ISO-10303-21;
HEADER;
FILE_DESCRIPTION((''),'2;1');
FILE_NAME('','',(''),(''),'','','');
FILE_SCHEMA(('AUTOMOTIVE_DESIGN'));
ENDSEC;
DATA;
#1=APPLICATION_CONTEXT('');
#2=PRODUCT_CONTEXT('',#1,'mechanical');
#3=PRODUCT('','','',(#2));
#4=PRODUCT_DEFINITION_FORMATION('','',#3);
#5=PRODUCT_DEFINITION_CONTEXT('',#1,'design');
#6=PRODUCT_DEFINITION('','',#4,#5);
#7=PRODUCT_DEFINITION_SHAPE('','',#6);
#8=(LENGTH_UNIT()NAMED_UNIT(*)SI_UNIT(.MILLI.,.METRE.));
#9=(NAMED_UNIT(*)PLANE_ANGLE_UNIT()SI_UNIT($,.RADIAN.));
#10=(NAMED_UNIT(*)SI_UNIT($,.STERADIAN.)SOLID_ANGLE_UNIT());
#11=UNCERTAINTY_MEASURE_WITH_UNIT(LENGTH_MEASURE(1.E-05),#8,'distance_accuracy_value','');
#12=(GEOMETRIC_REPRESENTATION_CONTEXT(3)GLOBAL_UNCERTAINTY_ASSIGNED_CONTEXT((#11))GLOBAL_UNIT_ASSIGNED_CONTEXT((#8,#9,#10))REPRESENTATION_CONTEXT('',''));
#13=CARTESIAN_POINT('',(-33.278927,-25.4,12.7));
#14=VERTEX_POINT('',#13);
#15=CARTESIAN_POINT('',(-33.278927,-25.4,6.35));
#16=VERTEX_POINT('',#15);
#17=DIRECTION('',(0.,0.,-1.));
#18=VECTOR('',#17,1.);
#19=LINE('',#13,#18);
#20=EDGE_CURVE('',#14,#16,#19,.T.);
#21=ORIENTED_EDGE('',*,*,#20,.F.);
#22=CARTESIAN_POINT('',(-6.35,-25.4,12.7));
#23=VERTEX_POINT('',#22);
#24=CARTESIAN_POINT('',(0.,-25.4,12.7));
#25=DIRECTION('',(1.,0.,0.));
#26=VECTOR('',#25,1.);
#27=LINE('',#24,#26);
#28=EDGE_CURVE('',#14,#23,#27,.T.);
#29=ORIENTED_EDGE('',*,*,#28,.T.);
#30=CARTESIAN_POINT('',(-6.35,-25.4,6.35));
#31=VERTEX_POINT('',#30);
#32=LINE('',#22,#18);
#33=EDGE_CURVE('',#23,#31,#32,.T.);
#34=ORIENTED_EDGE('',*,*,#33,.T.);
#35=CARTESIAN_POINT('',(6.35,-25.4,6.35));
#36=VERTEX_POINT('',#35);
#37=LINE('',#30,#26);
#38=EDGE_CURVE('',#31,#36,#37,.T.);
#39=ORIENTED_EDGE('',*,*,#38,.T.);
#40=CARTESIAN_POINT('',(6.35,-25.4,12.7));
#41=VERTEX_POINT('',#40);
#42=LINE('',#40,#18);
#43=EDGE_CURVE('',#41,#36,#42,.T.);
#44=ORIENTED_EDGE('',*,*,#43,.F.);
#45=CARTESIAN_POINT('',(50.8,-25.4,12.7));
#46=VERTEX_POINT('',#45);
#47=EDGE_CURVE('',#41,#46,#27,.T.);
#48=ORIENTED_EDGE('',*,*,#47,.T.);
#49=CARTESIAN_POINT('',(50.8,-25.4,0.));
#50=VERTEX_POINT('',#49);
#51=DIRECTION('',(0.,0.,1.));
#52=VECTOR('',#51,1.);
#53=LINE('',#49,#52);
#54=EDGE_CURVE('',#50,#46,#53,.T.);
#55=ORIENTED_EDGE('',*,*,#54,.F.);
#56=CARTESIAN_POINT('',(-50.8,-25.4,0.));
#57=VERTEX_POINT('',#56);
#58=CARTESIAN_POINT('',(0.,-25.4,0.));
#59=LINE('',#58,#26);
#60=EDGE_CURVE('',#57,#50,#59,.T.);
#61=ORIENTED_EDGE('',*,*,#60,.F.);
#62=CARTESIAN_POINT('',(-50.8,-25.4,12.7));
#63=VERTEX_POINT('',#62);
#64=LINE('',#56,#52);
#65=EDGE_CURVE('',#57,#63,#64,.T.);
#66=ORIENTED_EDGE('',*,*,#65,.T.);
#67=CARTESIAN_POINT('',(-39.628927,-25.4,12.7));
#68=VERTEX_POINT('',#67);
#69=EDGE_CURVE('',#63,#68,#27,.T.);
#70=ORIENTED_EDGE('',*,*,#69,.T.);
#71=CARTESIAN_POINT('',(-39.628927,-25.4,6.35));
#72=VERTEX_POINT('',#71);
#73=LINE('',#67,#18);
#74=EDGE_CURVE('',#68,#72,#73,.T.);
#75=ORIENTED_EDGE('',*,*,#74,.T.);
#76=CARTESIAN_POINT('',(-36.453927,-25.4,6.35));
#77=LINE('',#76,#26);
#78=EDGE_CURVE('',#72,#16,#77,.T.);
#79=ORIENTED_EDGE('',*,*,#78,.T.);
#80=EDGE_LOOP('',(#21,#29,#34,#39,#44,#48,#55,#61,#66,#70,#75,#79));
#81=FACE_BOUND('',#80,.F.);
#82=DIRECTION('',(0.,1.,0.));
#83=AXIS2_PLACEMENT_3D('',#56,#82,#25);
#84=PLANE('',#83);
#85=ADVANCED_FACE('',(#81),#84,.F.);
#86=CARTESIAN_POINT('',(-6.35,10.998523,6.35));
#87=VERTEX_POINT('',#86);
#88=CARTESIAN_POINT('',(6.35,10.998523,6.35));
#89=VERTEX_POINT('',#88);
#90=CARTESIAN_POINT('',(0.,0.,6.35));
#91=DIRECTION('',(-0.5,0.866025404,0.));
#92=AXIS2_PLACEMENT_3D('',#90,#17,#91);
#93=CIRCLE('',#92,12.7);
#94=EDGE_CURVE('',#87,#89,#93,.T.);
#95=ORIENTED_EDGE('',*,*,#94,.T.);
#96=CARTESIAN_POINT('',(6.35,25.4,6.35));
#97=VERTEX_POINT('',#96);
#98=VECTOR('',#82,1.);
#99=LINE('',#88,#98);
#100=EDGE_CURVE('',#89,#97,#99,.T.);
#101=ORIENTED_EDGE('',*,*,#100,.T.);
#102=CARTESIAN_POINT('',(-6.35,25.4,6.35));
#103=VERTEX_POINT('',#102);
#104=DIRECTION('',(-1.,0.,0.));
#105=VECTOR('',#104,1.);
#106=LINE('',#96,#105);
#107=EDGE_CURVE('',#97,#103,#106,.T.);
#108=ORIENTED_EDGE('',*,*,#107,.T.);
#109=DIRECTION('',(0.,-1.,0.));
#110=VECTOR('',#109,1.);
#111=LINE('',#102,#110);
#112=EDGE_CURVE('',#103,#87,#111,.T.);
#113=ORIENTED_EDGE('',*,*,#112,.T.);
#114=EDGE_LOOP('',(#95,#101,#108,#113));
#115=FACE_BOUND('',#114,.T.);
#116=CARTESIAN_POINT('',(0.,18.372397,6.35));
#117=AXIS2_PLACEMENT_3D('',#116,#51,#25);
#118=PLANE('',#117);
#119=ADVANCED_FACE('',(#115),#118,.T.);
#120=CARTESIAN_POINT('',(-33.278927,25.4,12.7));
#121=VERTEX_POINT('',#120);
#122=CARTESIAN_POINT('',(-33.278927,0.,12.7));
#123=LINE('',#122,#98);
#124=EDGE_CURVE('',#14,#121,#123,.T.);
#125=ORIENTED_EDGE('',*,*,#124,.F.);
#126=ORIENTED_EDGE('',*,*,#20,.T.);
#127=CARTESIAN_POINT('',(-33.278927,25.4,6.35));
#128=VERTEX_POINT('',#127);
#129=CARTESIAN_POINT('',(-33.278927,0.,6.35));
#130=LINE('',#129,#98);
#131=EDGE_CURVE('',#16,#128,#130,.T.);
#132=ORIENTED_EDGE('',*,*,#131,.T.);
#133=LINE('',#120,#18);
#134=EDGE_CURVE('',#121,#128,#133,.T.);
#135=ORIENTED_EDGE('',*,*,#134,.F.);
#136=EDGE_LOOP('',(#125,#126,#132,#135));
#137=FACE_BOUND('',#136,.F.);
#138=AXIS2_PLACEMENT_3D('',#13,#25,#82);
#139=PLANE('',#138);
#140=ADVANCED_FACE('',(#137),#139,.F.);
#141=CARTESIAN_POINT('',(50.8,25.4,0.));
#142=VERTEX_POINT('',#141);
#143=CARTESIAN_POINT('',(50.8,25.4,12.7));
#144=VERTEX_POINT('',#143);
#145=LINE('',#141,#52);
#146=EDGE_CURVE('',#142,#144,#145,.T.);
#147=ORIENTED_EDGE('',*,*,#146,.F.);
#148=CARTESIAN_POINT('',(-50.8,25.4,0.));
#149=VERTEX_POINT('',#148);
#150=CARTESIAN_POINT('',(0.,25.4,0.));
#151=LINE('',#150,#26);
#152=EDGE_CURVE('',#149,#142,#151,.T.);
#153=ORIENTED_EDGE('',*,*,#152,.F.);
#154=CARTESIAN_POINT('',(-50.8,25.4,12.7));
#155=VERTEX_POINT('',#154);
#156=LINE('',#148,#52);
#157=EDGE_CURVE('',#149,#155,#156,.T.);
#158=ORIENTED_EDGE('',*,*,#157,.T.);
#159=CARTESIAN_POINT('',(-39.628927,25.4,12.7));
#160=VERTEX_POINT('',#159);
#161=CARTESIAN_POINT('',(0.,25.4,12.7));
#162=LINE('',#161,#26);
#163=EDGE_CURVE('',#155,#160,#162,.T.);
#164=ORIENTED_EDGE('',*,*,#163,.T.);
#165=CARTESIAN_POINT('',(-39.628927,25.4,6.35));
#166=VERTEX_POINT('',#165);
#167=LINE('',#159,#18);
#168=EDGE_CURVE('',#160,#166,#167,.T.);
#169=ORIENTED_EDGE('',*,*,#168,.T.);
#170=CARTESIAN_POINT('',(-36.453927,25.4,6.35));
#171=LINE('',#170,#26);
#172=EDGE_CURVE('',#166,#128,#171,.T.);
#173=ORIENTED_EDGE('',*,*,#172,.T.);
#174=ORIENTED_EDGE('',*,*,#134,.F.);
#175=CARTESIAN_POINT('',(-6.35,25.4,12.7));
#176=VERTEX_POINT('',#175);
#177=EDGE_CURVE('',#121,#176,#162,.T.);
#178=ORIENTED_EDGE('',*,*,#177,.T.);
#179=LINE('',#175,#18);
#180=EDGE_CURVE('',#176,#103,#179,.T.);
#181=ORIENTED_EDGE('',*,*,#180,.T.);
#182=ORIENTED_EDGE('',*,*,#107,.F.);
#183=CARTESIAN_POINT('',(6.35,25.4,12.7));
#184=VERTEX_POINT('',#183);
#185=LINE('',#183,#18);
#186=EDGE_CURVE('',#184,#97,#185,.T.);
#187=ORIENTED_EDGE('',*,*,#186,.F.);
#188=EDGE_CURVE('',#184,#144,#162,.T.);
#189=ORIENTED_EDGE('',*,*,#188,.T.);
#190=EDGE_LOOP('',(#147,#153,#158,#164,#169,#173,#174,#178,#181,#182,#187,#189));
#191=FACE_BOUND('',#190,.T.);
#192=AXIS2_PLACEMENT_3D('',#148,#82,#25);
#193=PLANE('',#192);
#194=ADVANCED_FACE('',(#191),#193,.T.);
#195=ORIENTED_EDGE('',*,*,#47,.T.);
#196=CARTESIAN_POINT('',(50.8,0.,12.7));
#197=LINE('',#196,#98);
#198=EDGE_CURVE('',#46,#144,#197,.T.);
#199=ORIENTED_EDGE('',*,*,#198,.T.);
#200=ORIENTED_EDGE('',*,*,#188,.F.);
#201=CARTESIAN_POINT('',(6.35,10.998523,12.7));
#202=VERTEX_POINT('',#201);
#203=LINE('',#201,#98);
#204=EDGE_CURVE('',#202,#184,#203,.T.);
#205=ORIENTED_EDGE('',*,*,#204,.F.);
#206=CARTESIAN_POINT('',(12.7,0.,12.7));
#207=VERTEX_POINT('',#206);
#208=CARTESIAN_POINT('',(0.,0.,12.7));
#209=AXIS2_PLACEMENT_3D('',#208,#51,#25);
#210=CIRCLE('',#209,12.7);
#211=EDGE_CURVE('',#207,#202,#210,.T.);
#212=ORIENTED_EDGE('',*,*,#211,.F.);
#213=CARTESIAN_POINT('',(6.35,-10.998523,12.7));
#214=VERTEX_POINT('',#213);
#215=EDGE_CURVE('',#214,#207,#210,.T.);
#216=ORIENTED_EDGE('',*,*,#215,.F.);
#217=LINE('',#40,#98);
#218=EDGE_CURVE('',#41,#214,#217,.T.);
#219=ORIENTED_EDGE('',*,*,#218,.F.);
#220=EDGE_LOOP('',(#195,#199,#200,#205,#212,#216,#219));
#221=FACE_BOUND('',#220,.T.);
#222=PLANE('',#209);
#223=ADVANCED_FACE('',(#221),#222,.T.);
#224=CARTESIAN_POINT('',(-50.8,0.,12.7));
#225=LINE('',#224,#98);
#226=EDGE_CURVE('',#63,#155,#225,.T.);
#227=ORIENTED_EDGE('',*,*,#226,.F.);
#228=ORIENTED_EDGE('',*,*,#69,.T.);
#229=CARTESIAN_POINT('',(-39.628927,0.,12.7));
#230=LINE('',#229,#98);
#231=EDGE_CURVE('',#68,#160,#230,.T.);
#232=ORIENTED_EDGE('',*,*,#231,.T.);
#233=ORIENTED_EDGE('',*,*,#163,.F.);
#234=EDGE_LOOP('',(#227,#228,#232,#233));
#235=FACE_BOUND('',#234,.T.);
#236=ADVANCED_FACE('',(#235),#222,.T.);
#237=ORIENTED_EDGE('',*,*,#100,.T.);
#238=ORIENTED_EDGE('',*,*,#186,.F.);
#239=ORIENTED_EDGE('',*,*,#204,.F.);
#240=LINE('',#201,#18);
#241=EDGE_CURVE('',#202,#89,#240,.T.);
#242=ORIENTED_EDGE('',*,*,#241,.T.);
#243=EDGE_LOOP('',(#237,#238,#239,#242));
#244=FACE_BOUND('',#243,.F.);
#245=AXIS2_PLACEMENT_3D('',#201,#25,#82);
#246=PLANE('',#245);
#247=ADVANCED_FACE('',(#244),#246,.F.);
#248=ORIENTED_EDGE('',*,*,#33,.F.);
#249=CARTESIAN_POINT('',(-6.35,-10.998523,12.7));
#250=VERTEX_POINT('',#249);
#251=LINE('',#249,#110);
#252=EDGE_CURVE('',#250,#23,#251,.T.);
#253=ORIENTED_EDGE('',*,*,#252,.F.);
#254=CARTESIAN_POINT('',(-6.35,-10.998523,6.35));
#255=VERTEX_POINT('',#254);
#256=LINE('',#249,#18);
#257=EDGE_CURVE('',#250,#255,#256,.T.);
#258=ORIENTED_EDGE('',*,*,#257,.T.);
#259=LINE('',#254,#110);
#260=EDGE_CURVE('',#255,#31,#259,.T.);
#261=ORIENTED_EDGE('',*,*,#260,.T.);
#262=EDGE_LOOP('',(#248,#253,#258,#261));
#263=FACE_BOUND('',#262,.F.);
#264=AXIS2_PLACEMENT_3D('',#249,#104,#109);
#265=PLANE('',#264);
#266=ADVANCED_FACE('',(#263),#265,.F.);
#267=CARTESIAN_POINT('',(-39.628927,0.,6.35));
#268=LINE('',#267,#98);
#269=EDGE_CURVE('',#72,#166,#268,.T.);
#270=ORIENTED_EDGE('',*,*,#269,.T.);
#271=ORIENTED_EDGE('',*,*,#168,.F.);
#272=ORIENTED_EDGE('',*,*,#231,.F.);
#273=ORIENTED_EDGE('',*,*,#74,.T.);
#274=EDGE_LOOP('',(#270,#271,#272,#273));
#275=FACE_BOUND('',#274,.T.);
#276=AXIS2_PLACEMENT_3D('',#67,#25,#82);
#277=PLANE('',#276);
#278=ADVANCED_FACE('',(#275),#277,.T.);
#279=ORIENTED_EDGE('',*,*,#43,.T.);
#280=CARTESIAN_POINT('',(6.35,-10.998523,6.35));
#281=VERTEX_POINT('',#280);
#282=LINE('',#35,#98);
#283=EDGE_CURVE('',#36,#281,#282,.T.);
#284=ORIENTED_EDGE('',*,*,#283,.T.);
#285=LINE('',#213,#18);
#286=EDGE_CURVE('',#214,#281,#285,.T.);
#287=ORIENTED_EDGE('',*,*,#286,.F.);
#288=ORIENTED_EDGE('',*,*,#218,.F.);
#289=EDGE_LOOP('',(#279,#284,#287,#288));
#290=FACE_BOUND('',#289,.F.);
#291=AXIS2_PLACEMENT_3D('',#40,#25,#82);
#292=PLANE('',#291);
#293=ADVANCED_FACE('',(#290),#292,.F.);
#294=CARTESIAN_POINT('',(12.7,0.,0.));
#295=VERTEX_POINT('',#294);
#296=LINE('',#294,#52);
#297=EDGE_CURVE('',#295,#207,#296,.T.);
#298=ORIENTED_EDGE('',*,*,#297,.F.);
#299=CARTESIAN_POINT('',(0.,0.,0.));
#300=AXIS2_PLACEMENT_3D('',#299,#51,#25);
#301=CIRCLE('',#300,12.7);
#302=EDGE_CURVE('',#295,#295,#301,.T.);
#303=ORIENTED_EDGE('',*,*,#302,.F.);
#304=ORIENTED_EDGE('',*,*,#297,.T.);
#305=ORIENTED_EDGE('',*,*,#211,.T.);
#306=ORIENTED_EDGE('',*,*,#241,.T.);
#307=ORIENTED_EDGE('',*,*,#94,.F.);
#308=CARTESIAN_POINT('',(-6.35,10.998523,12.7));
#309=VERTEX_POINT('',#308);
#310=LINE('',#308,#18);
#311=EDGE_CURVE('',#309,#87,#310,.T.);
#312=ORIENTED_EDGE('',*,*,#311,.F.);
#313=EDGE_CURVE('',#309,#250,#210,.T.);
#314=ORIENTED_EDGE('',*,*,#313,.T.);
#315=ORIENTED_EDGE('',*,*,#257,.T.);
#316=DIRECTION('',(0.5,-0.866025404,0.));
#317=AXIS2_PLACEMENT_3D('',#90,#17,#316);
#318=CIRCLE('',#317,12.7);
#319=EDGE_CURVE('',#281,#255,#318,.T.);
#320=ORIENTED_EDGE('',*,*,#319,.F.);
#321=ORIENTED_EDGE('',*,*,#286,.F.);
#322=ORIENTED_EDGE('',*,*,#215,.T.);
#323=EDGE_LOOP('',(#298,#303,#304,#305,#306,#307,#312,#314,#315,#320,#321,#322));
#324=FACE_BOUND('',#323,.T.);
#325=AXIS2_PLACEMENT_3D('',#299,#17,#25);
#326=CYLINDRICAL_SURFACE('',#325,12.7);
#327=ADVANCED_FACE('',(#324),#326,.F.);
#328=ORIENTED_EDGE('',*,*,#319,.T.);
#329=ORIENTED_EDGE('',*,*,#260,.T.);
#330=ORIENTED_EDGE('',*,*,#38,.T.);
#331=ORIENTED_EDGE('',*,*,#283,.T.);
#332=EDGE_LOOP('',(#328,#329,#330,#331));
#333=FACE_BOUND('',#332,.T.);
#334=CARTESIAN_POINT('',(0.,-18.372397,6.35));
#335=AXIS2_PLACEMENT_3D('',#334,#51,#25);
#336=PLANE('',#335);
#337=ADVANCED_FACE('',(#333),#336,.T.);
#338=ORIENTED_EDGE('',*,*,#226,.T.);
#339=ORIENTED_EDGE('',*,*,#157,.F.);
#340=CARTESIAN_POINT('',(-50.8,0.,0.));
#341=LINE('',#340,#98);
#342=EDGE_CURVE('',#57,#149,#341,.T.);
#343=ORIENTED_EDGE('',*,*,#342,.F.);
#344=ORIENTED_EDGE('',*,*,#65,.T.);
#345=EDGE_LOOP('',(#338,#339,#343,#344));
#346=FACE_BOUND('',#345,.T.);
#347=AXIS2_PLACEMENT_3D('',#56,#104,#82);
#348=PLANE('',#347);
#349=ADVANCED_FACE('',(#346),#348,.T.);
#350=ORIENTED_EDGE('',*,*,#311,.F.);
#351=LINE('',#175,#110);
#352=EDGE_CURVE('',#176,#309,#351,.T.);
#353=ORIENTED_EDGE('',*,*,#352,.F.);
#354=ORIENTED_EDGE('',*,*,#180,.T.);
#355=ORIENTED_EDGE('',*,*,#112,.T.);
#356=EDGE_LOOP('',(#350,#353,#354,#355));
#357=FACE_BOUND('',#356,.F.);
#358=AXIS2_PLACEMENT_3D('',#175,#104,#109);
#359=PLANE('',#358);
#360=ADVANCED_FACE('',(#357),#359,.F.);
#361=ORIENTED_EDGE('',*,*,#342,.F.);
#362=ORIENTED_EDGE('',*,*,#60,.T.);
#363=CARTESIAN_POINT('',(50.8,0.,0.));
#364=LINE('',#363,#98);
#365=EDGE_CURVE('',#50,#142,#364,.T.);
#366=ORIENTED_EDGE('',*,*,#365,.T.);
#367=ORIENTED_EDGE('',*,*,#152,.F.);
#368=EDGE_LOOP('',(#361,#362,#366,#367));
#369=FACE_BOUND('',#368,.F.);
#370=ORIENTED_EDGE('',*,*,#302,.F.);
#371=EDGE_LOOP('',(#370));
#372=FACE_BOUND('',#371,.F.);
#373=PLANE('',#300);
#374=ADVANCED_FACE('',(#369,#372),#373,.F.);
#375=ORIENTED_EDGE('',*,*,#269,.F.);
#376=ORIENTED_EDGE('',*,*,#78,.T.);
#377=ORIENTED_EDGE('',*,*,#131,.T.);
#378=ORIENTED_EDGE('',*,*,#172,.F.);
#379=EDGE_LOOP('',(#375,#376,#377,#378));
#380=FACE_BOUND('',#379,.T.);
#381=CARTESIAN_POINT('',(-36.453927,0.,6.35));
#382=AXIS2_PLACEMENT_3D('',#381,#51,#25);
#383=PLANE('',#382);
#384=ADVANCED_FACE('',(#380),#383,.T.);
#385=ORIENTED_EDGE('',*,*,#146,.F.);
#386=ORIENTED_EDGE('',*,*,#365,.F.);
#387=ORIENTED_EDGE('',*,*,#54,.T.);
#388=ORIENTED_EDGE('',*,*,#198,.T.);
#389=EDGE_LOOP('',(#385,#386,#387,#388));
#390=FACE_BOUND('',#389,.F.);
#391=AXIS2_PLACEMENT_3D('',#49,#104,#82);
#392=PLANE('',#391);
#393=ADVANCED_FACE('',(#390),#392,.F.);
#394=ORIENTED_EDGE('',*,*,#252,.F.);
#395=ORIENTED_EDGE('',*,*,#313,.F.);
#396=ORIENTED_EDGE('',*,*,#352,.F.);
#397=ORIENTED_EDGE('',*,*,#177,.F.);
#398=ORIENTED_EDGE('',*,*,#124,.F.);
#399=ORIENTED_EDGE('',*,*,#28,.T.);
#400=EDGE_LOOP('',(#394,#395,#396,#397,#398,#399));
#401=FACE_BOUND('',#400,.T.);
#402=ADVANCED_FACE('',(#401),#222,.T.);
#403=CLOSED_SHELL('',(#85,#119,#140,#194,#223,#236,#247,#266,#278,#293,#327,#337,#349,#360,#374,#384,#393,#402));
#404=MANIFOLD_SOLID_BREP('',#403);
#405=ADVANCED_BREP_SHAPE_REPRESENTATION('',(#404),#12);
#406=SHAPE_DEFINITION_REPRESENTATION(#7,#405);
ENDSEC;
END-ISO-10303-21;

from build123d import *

# Parameters (mm, degrees)
F0_W     = 101.6
F0_H     = 50.8
F0_R     = 12.7
F1_DEPTH = 12.7
F2_W     = 6.35
F2_H     = 50.8
F3_DEPTH = 6.35


with BuildPart() as f1:
    # F0 (on Top) → F1 (new body)
    with BuildSketch(Plane.XY):
        Rectangle(F0_W, F0_H)
        Circle(F0_R, mode=Mode.SUBTRACT)
    extrude(amount=F1_DEPTH)

    # F2 (on face) → F3 (cut)
    with BuildSketch(Plane.XY.offset(12.7)):
        with Locations((-36.4539266646, 0)):
            Rectangle(F2_W, F2_H)
        with BuildLine():
            Line((-6.35, -10.9985226281), (-6.35, -25.4))
            Line((-6.35, -25.4), (6.35, -25.4))
            Line((6.35, -25.4), (6.35, -10.9985226281))
            ThreePointArc((6.35, -10.9985226281), (0, -12.7), (-6.35, -10.9985226281))
        make_face()
        with BuildLine():
            Line((6.35, 25.4), (-6.35, 25.4))
            Line((-6.35, 25.4), (-6.35, 10.9985226281))
            ThreePointArc((-6.35, 10.9985226281), (0, 12.7), (6.35, 10.9985226281))
            Line((6.35, 10.9985226281), (6.35, 25.4))
        make_face()
    extrude(amount=-F3_DEPTH, mode=Mode.SUBTRACT)


solid = f1.part
